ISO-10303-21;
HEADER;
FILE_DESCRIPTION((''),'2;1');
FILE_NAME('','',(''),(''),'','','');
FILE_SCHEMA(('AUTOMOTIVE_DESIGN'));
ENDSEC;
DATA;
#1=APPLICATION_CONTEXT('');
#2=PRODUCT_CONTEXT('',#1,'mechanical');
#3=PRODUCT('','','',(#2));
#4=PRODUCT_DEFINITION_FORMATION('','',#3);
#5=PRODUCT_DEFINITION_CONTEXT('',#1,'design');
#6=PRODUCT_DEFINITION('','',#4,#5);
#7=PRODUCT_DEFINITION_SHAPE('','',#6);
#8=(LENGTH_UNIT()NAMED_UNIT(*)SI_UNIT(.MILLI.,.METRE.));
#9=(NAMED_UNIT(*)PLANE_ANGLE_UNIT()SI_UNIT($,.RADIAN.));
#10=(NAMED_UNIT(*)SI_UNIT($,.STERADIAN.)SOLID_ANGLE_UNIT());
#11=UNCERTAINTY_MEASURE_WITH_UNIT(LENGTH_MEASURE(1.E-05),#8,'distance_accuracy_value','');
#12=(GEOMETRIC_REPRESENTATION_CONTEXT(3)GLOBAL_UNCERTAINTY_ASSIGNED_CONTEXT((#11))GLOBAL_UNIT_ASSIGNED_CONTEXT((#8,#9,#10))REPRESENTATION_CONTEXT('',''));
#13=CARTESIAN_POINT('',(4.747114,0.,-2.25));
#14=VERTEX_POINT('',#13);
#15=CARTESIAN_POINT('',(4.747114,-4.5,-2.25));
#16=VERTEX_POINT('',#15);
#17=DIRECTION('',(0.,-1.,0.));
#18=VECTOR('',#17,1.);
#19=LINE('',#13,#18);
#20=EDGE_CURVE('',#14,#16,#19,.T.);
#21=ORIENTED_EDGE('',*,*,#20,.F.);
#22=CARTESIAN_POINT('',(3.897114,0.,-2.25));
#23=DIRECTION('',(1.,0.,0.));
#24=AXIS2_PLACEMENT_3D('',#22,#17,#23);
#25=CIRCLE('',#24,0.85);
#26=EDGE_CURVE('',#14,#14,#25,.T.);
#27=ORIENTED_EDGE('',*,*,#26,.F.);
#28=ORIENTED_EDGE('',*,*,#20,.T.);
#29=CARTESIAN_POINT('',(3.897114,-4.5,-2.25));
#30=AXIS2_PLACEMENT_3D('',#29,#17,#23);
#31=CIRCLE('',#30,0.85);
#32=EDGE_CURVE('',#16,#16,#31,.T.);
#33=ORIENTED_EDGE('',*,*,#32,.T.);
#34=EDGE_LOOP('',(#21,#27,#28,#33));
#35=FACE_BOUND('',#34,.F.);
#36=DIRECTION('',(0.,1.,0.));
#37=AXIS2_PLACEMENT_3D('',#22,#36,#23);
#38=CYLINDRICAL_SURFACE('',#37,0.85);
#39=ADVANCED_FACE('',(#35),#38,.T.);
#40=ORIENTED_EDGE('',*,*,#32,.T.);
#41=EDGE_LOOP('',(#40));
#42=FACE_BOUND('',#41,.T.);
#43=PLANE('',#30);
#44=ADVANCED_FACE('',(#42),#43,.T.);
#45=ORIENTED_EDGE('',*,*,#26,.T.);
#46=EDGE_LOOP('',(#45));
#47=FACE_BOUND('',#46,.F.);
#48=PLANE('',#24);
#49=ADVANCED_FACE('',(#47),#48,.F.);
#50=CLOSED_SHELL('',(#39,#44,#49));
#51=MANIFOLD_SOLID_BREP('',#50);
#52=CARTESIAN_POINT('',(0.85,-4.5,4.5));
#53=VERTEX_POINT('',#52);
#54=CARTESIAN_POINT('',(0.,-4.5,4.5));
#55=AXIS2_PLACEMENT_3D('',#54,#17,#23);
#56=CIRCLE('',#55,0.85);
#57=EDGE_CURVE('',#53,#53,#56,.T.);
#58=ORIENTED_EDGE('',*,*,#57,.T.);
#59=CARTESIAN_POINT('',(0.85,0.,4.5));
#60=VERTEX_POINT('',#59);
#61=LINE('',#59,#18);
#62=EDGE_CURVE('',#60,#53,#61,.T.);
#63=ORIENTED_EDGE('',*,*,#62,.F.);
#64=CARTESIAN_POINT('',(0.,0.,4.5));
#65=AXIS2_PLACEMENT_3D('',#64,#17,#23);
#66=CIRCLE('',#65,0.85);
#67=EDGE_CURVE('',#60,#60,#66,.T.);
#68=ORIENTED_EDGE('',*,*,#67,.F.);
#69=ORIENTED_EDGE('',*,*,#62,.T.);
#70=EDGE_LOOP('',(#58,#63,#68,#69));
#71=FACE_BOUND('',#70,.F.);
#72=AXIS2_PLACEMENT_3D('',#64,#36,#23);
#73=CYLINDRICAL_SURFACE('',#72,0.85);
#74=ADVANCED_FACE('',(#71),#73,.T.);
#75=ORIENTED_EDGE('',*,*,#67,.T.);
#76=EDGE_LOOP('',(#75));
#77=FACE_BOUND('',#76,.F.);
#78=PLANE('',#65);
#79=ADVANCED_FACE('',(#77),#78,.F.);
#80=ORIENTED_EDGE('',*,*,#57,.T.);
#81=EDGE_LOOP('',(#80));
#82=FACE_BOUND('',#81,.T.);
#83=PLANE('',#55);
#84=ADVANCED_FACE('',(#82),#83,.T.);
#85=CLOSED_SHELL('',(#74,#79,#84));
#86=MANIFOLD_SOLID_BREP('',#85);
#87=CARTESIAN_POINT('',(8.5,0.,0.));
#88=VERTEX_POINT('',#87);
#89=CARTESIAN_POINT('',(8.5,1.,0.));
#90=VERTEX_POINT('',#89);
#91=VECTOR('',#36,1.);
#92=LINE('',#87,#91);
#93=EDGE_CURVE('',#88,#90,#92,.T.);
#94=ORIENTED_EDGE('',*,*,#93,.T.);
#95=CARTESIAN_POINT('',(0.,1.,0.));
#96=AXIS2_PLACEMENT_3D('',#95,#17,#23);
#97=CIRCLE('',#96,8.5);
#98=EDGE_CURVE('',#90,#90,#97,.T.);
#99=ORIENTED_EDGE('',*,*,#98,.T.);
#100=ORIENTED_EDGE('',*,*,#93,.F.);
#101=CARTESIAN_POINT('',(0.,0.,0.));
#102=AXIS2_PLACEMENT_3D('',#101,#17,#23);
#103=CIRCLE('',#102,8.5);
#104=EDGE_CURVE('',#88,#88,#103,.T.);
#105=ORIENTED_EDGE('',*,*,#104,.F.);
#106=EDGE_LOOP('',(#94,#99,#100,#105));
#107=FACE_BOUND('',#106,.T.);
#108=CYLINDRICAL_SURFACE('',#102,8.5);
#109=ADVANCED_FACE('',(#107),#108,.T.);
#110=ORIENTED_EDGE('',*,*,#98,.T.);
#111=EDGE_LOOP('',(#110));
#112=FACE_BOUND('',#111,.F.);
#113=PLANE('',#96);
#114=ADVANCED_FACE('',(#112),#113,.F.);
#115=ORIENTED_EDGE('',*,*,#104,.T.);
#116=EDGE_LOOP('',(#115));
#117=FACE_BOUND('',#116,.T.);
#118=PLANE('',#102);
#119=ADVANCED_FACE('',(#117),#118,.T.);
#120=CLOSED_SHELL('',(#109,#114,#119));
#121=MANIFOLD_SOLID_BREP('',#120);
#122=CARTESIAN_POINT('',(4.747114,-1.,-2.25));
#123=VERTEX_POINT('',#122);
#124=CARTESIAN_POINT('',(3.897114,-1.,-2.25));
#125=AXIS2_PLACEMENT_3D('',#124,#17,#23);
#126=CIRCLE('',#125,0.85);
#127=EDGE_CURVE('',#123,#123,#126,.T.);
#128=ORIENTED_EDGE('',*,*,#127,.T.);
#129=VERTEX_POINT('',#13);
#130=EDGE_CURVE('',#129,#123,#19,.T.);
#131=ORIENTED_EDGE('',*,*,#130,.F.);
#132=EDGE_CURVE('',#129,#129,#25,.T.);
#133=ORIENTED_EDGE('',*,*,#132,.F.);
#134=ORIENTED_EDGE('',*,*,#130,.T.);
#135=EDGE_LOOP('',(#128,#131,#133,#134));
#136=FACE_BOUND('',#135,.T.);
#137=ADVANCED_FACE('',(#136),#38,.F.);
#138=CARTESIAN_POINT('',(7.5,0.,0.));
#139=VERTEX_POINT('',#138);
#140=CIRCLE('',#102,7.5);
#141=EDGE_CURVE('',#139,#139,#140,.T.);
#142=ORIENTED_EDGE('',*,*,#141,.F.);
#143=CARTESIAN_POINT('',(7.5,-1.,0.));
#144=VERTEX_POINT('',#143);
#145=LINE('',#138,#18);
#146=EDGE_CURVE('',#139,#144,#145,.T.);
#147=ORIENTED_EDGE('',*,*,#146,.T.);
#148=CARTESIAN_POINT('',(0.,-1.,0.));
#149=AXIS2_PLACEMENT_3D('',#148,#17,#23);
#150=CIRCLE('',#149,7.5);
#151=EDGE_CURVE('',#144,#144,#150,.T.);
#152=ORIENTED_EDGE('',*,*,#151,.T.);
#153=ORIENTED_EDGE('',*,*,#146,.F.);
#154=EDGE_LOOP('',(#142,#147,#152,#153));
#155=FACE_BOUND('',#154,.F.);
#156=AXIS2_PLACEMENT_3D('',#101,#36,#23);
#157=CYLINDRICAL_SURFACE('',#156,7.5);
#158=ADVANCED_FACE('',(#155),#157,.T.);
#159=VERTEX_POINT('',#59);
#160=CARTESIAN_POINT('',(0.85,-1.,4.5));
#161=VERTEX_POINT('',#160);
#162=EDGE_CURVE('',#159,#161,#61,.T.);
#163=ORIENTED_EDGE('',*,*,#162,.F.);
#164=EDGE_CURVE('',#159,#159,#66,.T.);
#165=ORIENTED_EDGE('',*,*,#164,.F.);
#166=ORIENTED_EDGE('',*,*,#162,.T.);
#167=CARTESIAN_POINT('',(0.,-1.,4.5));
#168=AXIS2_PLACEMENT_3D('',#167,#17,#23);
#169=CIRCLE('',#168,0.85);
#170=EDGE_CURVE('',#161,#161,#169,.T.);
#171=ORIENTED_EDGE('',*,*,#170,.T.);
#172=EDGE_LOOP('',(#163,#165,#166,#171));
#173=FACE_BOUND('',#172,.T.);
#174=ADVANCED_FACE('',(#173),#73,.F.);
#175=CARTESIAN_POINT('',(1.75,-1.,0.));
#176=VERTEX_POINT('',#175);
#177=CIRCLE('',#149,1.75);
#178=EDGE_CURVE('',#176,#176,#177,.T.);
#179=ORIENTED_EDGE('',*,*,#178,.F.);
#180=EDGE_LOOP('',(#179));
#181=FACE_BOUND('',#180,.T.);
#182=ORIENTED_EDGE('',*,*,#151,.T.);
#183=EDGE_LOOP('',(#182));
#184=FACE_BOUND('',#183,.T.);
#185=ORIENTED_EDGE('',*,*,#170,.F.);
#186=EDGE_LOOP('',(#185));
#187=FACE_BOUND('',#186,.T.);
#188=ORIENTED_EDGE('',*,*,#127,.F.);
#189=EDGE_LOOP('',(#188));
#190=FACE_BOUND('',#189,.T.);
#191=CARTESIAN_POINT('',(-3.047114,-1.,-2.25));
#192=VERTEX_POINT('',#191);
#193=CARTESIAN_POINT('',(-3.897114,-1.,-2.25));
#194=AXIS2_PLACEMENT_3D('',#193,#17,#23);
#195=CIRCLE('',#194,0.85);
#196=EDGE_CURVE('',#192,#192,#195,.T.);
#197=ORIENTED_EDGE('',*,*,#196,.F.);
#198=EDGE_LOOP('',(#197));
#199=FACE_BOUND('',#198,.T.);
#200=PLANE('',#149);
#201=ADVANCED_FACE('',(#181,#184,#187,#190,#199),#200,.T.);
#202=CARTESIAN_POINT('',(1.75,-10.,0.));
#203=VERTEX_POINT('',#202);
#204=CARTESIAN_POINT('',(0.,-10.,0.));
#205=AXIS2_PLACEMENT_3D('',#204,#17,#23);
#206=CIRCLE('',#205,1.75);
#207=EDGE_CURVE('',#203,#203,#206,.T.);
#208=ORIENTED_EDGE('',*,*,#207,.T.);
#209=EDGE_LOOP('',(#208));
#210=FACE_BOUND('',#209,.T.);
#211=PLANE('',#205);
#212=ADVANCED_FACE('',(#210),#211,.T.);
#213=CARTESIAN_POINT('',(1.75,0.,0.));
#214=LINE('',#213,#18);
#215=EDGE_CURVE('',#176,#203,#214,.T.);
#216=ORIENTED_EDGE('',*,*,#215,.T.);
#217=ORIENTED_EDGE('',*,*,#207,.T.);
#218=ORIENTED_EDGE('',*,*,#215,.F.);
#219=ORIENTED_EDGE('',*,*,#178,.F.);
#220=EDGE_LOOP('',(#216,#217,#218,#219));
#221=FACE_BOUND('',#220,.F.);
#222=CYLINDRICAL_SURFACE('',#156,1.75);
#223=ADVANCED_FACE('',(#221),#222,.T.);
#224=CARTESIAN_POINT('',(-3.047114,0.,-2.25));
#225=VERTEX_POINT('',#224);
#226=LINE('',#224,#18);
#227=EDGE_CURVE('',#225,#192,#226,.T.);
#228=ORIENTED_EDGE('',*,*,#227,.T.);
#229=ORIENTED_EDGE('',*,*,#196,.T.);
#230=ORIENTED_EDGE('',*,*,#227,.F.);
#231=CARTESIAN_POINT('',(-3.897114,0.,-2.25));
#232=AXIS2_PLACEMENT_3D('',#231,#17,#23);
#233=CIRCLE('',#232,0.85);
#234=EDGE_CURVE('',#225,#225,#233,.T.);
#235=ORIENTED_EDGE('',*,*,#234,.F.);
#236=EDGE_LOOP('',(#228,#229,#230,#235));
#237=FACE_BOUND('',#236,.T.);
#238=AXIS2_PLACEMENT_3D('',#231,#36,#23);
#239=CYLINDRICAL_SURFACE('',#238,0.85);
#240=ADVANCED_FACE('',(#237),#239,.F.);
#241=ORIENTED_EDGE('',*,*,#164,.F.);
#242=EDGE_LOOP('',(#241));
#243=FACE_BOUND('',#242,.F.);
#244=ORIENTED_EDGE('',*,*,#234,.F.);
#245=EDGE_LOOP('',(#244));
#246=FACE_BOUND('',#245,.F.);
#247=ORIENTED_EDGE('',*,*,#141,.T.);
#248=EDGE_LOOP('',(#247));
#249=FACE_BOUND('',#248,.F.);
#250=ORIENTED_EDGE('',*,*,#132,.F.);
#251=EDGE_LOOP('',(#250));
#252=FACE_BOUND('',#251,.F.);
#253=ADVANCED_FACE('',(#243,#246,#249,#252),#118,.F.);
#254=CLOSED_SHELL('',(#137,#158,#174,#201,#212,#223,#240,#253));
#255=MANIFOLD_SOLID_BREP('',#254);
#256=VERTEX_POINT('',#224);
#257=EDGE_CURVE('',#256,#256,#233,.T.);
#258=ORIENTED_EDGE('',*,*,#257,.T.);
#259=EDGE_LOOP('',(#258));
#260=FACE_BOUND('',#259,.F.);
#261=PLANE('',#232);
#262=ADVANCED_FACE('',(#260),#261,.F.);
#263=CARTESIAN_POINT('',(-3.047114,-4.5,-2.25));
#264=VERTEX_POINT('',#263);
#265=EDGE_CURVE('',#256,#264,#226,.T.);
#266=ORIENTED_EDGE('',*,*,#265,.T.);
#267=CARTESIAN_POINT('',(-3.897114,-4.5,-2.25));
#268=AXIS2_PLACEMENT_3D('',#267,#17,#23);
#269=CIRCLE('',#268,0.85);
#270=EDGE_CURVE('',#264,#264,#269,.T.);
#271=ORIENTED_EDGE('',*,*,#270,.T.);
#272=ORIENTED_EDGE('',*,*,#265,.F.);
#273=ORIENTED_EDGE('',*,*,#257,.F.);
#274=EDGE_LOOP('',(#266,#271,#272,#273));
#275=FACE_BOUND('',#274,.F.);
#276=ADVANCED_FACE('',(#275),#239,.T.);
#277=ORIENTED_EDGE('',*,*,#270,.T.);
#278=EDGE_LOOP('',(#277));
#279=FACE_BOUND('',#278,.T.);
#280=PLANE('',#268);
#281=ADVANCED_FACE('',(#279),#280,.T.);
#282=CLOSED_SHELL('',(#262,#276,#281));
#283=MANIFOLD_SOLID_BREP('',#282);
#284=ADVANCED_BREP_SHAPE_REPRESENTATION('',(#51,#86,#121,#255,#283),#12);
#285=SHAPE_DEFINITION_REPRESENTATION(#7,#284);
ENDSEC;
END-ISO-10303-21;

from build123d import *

# Parameters (mm, degrees)
F0_R     = 0.85
F1_DEPTH = 4.5
F0_R_2   = 7.5
F0_R_3   = 1.75
F2_DEPTH = 1
F0_R_4   = 8.5
F3_DEPTH = 1
F4_DEPTH = 10


with BuildPart() as f1:
    # F0 (on Front) → F1 (new body)
    with BuildSketch(Plane.XZ):
        with Locations((0, 4.5)):
            Circle(F0_R)
    extrude(amount=F1_DEPTH)


with BuildPart() as f1b:
    # F0 (on Front) → F1, piece 2 (new body)
    with BuildSketch(Plane.XZ):
        with Locations((-3.897114317, -2.25)):
            Circle(F0_R)
    extrude(amount=F1_DEPTH)


with BuildPart() as f1c:
    # F0 (on Front) → F1, piece 3 (new body)
    with BuildSketch(Plane.XZ):
        with Locations((3.897114317, -2.25)):
            Circle(F0_R)
    extrude(amount=F1_DEPTH)


with BuildPart() as f2:
    # F0 (on Front) → F2 (new body)
    with BuildSketch(Plane.XZ):
        Circle(F0_R_2)
        with Locations((-3.897114317, -2.25)):
            Circle(F0_R, mode=Mode.SUBTRACT)
        with Locations((3.897114317, -2.25)):
            Circle(F0_R, mode=Mode.SUBTRACT)
        Circle(F0_R_3, mode=Mode.SUBTRACT)
        with Locations((0, 4.5)):
            Circle(F0_R, mode=Mode.SUBTRACT)
    extrude(amount=F2_DEPTH)

    # F0 (on Front) → F4 (join)
    with BuildSketch(Plane.XZ):
        Circle(F0_R_3)
    extrude(amount=F4_DEPTH)


with BuildPart() as f3:
    # F0 (on Front) → F3 (new body)
    with BuildSketch(Plane.XZ):
        Circle(F0_R_4)
        Circle(F0_R_2, mode=Mode.SUBTRACT)
        Circle(F0_R_2)
        with Locations((-3.897114317, -2.25)):
            Circle(F0_R, mode=Mode.SUBTRACT)
        with Locations((3.897114317, -2.25)):
            Circle(F0_R, mode=Mode.SUBTRACT)
        Circle(F0_R_3, mode=Mode.SUBTRACT)
        with Locations((0, 4.5)):
            Circle(F0_R, mode=Mode.SUBTRACT)
        Circle(F0_R_3)
        with Locations((3.897114317, -2.25)):
            Circle(F0_R)
        with Locations((-3.897114317, -2.25)):
            Circle(F0_R)
        with Locations((0, 4.5)):
            Circle(F0_R)
    extrude(amount=-F3_DEPTH)


solid = Compound([f1.part, f1b.part, f1c.part, f2.part, f3.part])
